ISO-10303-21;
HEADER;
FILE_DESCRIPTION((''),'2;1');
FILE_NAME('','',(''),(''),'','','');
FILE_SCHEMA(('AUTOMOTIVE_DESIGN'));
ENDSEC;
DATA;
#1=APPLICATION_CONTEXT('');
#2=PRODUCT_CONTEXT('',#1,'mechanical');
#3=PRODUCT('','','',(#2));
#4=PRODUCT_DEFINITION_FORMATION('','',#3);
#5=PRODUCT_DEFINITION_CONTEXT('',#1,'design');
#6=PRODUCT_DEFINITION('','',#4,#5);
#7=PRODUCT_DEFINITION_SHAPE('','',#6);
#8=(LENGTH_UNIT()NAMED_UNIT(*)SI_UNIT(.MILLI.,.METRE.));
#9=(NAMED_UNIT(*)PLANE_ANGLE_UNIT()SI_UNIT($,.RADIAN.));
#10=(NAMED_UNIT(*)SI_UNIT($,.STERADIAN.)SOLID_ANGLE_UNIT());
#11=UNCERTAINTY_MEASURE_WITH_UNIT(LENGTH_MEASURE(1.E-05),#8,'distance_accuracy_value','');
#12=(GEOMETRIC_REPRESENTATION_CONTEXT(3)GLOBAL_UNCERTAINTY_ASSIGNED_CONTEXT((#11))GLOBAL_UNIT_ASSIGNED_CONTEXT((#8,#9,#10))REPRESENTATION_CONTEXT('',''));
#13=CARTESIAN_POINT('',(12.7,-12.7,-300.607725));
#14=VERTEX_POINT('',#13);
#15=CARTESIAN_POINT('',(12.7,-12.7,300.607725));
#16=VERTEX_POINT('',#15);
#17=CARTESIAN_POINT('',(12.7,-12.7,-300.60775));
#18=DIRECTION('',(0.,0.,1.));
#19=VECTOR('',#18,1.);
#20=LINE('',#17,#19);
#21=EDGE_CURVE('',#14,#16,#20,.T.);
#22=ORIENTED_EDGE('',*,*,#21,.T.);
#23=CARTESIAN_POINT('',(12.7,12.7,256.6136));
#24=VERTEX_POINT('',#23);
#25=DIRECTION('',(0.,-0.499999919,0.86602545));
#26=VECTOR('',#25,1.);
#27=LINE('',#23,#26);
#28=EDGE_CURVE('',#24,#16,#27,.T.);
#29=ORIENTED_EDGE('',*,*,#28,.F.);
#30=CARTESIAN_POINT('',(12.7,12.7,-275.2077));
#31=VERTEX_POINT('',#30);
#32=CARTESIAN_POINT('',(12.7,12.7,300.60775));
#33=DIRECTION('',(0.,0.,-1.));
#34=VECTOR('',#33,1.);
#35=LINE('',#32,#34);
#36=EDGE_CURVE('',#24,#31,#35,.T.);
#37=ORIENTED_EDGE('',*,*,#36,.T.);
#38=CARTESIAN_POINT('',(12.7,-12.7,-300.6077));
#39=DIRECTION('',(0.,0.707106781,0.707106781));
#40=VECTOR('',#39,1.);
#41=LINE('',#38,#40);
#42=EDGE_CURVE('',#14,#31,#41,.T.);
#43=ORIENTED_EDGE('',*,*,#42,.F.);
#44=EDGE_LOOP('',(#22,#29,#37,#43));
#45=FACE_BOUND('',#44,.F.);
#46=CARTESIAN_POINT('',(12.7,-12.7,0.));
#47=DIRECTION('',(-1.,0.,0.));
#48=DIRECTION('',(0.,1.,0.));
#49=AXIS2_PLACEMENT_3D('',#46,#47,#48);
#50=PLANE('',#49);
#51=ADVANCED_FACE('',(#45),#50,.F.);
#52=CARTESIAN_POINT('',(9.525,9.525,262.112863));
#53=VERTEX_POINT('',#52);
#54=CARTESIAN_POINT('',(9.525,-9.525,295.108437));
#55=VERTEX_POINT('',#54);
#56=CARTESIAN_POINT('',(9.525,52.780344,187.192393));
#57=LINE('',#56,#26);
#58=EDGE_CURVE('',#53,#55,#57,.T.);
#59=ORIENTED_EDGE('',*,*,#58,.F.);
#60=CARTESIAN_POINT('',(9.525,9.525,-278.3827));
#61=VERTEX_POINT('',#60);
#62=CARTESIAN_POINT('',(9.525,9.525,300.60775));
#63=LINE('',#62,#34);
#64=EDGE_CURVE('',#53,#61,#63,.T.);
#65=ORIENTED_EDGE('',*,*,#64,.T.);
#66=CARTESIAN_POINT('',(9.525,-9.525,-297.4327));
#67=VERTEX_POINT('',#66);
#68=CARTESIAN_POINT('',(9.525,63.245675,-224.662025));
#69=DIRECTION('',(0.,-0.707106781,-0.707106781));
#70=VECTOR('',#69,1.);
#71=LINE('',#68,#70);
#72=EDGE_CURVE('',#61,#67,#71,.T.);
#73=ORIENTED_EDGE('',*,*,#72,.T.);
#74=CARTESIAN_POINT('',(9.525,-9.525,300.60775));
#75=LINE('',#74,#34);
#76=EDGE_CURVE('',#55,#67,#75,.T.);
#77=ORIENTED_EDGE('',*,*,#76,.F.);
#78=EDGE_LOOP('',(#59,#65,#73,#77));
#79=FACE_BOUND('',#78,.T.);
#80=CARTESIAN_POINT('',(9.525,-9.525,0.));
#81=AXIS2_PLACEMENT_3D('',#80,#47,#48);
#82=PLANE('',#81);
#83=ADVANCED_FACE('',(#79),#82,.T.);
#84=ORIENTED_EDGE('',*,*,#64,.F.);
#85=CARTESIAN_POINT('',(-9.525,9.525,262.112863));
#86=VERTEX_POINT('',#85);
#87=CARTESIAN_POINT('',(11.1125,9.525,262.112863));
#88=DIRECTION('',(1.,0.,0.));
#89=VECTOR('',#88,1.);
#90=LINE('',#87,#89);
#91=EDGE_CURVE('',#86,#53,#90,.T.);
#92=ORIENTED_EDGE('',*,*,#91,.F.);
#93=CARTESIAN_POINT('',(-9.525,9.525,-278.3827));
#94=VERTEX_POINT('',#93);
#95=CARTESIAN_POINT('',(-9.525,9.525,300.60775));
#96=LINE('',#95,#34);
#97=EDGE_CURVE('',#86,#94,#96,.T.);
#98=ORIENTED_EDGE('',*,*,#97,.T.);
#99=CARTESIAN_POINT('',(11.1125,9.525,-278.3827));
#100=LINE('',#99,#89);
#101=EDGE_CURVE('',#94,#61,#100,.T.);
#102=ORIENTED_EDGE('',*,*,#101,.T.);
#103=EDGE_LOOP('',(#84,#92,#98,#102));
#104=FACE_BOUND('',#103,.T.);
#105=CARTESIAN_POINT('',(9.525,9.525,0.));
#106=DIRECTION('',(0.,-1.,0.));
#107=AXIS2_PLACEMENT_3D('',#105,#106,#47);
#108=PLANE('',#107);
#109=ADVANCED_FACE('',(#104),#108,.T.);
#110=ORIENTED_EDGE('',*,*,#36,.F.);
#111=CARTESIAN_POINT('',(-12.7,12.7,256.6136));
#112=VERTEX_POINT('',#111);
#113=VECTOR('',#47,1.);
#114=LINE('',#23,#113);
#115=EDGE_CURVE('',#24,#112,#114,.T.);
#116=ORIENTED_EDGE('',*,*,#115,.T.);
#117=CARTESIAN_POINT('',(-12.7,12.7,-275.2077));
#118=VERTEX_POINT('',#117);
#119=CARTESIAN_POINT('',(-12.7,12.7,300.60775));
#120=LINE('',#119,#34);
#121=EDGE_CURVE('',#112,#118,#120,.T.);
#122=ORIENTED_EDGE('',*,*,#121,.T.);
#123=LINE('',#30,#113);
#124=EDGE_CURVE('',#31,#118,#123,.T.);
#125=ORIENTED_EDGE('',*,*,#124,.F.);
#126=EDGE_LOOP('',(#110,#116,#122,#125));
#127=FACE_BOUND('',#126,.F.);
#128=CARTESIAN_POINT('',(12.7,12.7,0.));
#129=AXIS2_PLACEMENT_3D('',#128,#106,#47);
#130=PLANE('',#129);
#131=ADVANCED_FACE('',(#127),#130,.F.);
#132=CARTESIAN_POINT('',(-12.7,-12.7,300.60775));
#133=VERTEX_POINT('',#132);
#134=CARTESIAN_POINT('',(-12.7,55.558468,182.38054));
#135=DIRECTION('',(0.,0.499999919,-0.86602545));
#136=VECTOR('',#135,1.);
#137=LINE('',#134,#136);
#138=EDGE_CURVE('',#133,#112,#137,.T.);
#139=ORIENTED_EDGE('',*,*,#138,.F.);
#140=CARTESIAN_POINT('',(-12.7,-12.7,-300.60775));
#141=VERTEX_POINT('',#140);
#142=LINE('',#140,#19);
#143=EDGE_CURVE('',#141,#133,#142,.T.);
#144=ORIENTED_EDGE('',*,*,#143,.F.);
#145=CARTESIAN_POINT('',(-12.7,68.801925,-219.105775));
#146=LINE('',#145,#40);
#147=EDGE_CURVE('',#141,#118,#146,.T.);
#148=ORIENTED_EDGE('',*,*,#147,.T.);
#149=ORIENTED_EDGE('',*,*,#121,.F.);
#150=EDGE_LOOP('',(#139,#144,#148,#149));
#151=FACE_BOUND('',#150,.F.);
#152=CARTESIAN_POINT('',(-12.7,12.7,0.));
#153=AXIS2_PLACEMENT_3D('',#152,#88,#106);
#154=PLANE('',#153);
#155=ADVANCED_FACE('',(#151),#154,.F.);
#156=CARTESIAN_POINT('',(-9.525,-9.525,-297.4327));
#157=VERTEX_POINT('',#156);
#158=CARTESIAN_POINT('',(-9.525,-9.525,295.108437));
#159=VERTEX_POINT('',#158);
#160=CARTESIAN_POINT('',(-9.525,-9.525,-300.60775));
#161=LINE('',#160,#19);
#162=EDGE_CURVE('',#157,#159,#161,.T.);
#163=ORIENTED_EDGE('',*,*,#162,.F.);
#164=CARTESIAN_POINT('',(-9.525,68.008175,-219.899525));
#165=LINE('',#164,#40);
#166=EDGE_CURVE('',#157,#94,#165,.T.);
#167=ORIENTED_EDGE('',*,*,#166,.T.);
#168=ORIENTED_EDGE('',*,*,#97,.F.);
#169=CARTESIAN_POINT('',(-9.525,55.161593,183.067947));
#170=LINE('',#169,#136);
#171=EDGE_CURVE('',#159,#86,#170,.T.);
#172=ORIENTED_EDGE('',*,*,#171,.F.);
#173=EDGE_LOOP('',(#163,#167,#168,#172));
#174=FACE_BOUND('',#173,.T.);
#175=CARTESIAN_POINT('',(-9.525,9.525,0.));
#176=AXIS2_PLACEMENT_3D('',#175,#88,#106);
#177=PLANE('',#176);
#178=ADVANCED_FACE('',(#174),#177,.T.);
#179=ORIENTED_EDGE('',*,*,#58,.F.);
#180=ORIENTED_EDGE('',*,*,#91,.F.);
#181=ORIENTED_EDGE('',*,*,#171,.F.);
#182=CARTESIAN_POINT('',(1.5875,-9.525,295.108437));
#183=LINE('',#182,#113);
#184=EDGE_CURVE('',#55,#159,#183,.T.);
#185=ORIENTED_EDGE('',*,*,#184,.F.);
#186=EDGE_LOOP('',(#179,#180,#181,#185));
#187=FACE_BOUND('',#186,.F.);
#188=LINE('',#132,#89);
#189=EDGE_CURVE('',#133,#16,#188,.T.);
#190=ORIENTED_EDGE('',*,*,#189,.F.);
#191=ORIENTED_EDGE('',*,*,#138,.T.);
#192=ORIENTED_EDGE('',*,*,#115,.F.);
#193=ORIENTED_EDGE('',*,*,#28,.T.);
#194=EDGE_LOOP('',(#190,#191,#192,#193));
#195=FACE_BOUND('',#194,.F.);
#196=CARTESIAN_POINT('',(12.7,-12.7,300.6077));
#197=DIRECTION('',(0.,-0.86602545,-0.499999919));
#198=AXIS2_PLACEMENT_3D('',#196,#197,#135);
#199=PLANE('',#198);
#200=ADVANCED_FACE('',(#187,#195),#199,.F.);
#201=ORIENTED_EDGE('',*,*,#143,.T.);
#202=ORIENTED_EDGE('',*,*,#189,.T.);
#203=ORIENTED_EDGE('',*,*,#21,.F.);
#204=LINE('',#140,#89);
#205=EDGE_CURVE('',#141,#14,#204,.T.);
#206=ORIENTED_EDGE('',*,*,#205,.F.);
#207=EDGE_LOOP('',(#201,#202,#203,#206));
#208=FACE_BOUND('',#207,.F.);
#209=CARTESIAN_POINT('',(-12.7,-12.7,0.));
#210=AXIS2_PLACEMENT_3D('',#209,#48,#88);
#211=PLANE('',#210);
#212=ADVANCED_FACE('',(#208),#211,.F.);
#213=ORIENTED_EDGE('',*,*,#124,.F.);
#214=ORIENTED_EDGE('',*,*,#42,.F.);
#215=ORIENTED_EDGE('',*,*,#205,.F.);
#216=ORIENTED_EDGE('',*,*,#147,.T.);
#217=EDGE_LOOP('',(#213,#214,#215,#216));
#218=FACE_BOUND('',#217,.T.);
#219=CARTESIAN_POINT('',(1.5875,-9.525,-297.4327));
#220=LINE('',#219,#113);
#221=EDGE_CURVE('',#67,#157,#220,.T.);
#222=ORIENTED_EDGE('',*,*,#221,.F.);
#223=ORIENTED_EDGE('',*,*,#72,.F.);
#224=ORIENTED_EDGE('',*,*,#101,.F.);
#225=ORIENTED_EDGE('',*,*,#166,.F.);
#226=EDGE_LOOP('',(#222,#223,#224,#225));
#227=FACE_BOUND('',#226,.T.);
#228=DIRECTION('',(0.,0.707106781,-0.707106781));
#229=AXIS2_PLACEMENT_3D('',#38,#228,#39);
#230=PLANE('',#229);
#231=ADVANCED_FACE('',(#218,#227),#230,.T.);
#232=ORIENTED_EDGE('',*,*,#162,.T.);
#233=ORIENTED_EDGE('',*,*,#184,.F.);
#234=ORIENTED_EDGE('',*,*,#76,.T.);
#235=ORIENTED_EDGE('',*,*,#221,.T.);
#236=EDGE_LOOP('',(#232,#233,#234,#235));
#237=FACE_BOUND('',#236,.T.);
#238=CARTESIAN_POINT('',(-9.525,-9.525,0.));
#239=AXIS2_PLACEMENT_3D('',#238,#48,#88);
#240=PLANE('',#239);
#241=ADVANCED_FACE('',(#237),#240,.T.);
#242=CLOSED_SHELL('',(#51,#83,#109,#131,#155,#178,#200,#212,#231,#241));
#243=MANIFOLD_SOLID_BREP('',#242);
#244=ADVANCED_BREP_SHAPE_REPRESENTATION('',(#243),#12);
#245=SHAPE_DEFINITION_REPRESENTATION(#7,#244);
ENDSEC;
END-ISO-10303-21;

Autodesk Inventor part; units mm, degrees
ref_plane "YZ Plane" through (0, 0, 0) normal (1, 0, 0) x (0, 1, 0)
ref_plane "XZ Plane" through (0, 0, 0) normal (0, 1, 0) x (-1, 0, 0)
ref_plane "XY Plane" through (0, 0, 0) normal (0, 0, 1) x (1, 0, 0)
sketch "Sketch2" plane through (0, 0, 0) normal (0, 0, 1) x (1, 0, 0)
  line L0 (-12.7, -12.7) -> (12.7, -12.7)
  line L1 (12.7, -12.7) -> (12.7, 12.7)
  line L2 (12.7, 12.7) -> (-12.7, 12.7)
  line L3 (-12.7, 12.7) -> (-12.7, -12.7)
  line L4 (-12.7, -12.7) -> (12.7, 12.7) construction
  line L5 (12.7, -12.7) -> (-12.7, 12.7) construction
  line L6 (-9.525, -9.525) -> (9.525, -9.525)
  line L7 (9.525, -9.525) -> (9.525, 9.525)
  line L8 (9.525, 9.525) -> (-9.525, 9.525)
  line L9 (-9.525, 9.525) -> (-9.525, -9.525)
  line L10 (-9.525, -9.525) -> (9.525, 9.525) construction
  line L11 (9.525, -9.525) -> (-9.525, 9.525) construction
  point P0 (0, 0)
  dimension "d0" = 25.4
  dimension "d1" = 25.4
  dimension "d2" = 3.175
  dimension "d3" = 3.175
extrude "Extrusion1" add sketch "Sketch2" along normal mid plane 601.2155
sketch "Sketch3" plane through (12.7, -12.7, 300.6077) normal (1, 0, 0) x (0, 0, -1)
  line L0 (601.2155, 0) -> (0, 0) projected
  line L1 (0, 0) -> (43.9941, 25.4)
  line L2 (601.2155, 25.4) -> (0, 25.4) projected
  line L3 (43.9941, 25.4) -> (0, 25.4)
  line L4 (0, 0) -> (0, 25.4)
  line L5 (0, 3.175) -> (601.2155, 3.175) projected
  point P0 (300.6077, 12.7)
  dimension "d6" = 30
extrude "Extrusion2" cut sketch "Sketch3" against normal through all
sketch "Sketch5" plane through (12.7, -12.7, -300.6077) normal (1, 0, 0) x (0, 0, -1)
  line L0 (0, 0) -> (-25.4, 25.4)
  line L1 (-557.2214, 25.4) -> (0, 25.4) projected
  line L2 (0, 0) -> (-601.2155, 0) projected
  line L3 (-25.4, 25.4) -> (0, 25.4)
  line L4 (0, 0) -> (0, 25.4) projected
  line L5 (0, 25.4) -> (0, 0)
  point P0 (-300.6077, 12.7)
  dimension "d10" = 45
extrude "Extrusion3" cut sketch "Sketch5" against normal through all
properties part number "aluminumBallHandlerBase" material "Aluminum 6061-AHC"
